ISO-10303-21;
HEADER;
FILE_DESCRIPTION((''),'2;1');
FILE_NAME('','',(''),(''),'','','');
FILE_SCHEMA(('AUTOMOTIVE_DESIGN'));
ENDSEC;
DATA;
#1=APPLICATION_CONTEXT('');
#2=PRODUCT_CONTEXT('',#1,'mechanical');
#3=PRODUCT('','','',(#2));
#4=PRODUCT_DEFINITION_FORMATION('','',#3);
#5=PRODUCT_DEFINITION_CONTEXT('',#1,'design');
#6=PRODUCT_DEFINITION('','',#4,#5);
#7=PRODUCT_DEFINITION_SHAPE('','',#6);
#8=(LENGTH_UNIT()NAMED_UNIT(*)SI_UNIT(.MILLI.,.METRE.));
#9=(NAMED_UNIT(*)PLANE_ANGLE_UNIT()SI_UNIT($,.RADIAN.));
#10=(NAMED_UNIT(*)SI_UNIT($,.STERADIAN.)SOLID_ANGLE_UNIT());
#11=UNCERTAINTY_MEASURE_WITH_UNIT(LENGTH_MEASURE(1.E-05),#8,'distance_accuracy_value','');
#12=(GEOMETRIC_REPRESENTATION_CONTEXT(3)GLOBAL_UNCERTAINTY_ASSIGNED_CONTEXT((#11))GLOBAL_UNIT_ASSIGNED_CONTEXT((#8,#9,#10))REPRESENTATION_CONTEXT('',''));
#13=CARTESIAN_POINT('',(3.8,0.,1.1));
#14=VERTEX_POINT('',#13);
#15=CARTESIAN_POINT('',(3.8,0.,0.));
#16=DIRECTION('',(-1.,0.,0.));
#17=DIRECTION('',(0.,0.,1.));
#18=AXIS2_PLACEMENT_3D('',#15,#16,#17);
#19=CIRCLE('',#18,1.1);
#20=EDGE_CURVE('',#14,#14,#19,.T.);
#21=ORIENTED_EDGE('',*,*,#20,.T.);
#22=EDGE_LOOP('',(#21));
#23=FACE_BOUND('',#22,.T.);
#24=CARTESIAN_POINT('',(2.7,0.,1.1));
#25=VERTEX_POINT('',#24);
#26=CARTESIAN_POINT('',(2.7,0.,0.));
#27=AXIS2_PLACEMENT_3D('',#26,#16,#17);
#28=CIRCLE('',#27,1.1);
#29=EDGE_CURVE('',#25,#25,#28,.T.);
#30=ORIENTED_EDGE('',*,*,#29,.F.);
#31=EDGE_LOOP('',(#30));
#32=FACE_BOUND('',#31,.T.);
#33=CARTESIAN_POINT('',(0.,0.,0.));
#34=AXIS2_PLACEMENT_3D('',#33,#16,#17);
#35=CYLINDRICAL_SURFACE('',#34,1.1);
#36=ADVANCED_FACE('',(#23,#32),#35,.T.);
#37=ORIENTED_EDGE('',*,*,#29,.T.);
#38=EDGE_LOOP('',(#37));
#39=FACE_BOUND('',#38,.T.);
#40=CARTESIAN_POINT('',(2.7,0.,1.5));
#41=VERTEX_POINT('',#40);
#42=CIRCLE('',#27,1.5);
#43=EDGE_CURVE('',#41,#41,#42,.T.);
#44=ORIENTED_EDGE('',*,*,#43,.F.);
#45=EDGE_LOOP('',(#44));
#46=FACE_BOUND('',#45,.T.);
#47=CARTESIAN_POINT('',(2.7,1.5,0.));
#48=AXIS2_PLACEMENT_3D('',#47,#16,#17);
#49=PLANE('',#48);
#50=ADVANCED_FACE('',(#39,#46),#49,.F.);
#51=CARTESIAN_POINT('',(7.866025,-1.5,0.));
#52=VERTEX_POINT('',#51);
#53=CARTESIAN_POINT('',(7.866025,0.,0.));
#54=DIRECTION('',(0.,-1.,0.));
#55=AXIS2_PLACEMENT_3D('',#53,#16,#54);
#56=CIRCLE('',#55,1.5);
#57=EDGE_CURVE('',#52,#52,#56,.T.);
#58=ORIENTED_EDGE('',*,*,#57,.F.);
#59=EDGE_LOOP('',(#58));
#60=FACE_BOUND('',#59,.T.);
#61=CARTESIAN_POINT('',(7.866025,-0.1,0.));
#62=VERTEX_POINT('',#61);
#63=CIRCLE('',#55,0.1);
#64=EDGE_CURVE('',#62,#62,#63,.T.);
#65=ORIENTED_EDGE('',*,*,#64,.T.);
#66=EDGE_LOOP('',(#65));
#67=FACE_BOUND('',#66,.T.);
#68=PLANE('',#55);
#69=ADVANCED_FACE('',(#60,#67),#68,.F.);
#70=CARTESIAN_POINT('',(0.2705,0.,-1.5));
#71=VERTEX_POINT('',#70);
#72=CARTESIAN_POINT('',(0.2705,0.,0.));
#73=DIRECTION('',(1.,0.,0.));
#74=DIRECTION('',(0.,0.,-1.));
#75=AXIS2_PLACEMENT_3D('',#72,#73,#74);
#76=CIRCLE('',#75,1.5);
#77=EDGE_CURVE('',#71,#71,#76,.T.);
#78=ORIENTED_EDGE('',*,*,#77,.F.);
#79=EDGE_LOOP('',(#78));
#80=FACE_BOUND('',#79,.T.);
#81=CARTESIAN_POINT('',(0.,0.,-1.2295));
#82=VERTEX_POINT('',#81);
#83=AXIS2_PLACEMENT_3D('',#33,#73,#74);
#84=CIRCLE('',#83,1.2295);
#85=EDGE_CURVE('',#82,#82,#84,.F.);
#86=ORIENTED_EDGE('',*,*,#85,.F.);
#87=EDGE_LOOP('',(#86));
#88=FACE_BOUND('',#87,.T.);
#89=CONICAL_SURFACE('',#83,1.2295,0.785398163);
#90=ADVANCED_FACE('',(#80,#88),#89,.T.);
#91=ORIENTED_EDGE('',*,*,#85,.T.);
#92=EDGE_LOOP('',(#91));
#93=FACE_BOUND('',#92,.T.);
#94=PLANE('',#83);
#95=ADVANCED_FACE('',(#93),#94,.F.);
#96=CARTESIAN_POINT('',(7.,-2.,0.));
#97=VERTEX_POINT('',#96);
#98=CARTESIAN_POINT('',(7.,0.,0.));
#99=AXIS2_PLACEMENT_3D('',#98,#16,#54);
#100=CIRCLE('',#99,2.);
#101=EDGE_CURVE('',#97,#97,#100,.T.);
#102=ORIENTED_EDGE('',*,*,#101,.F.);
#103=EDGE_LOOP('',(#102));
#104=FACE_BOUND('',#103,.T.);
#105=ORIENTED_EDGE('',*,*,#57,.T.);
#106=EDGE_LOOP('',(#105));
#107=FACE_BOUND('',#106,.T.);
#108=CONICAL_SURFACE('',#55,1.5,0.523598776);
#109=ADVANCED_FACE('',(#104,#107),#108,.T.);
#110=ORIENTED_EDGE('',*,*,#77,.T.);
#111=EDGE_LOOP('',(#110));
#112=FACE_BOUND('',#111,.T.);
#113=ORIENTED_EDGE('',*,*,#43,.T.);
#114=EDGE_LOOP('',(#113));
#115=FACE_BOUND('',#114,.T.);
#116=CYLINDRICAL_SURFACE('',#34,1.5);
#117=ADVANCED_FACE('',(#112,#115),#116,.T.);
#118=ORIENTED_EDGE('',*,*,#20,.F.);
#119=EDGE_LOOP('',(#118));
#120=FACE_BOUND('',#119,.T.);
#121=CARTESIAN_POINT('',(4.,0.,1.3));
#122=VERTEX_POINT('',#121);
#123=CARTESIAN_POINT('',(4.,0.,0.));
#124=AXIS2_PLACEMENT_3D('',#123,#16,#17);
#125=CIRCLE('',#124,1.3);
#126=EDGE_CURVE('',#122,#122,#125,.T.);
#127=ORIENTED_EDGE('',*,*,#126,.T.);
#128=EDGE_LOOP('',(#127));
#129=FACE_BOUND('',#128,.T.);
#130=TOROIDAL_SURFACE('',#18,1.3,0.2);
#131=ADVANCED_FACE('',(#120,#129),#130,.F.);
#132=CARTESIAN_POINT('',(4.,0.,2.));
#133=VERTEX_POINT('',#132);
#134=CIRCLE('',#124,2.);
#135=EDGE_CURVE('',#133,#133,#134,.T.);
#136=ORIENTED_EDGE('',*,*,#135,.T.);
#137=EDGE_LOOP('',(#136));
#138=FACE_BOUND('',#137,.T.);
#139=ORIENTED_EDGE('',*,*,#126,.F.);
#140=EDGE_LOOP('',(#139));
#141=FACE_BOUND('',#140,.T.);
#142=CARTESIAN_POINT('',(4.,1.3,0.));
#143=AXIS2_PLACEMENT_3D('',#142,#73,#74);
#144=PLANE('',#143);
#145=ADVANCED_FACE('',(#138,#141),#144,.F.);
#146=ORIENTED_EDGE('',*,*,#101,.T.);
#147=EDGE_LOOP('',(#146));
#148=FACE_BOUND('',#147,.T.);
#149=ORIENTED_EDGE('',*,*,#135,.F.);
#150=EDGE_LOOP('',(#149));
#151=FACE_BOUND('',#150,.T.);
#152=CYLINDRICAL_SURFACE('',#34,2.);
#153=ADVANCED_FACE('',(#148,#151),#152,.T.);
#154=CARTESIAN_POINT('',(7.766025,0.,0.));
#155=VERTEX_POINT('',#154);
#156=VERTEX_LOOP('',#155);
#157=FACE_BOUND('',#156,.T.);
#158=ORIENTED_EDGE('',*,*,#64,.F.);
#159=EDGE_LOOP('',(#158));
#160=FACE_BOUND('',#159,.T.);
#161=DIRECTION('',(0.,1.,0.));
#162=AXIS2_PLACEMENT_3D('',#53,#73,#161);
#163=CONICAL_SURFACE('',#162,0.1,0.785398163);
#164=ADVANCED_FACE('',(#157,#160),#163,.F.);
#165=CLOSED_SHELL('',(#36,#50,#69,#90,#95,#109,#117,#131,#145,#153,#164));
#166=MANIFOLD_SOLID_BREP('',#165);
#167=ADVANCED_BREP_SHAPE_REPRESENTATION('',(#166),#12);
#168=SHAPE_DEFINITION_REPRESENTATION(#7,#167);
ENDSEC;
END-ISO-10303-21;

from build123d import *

# Parameters (mm, degrees)
CHAMFER5_SIZE = 0.2705


with BuildPart() as part:
    # Sketch1 → Revolve1 (revolve)
    with BuildSketch(Plane.XY):
        with BuildLine():
            Line((0, 0), (0, 1.5))
            Line((0, 1.5), (2.7, 1.5))
            Line((2.7, 1.5), (2.7, 1.1))
            Line((2.7, 1.1), (3.8, 1.1))
            ThreePointArc((3.8, 1.1), (3.941421356, 1.158578644), (4, 1.3))
            Line((4, 1.3), (4, 2))
            Line((4, 2), (7, 2))
            Line((7, 2), (7, 0))
            Line((7, 0), (0, 0))
        make_face()
    revolve(axis=Axis((0, 0, 0), (1, 0, 0)))

    # Chamfer5
    chamfer5_edges = [part.edges().sort_by_distance(p)[0] for p in [
        (0, -1.5, 0),
    ]]
    chamfer(chamfer5_edges, length=CHAMFER5_SIZE)

    # Sketch5 → Revolve3 (revolve)
    with BuildSketch(Plane.XY):
        Polygon((7, 0), (7, 2), (7.866025404, 1.5), (7.866025404, 0), align=None)
    revolve(axis=Axis((0, 0, 0), (1, 0, 0)))

    # Sketch6 → Cut-Revolve3 (revolve, cut)
    with BuildSketch(Plane.XY):
        Polygon((7.866025404, 0.1), (7.866025404, 0), (7.766025404, 0), align=None)
    revolve(axis=Axis((0, 0, 0), (1, 0, 0)), mode=Mode.SUBTRACT)


solid = part.part
